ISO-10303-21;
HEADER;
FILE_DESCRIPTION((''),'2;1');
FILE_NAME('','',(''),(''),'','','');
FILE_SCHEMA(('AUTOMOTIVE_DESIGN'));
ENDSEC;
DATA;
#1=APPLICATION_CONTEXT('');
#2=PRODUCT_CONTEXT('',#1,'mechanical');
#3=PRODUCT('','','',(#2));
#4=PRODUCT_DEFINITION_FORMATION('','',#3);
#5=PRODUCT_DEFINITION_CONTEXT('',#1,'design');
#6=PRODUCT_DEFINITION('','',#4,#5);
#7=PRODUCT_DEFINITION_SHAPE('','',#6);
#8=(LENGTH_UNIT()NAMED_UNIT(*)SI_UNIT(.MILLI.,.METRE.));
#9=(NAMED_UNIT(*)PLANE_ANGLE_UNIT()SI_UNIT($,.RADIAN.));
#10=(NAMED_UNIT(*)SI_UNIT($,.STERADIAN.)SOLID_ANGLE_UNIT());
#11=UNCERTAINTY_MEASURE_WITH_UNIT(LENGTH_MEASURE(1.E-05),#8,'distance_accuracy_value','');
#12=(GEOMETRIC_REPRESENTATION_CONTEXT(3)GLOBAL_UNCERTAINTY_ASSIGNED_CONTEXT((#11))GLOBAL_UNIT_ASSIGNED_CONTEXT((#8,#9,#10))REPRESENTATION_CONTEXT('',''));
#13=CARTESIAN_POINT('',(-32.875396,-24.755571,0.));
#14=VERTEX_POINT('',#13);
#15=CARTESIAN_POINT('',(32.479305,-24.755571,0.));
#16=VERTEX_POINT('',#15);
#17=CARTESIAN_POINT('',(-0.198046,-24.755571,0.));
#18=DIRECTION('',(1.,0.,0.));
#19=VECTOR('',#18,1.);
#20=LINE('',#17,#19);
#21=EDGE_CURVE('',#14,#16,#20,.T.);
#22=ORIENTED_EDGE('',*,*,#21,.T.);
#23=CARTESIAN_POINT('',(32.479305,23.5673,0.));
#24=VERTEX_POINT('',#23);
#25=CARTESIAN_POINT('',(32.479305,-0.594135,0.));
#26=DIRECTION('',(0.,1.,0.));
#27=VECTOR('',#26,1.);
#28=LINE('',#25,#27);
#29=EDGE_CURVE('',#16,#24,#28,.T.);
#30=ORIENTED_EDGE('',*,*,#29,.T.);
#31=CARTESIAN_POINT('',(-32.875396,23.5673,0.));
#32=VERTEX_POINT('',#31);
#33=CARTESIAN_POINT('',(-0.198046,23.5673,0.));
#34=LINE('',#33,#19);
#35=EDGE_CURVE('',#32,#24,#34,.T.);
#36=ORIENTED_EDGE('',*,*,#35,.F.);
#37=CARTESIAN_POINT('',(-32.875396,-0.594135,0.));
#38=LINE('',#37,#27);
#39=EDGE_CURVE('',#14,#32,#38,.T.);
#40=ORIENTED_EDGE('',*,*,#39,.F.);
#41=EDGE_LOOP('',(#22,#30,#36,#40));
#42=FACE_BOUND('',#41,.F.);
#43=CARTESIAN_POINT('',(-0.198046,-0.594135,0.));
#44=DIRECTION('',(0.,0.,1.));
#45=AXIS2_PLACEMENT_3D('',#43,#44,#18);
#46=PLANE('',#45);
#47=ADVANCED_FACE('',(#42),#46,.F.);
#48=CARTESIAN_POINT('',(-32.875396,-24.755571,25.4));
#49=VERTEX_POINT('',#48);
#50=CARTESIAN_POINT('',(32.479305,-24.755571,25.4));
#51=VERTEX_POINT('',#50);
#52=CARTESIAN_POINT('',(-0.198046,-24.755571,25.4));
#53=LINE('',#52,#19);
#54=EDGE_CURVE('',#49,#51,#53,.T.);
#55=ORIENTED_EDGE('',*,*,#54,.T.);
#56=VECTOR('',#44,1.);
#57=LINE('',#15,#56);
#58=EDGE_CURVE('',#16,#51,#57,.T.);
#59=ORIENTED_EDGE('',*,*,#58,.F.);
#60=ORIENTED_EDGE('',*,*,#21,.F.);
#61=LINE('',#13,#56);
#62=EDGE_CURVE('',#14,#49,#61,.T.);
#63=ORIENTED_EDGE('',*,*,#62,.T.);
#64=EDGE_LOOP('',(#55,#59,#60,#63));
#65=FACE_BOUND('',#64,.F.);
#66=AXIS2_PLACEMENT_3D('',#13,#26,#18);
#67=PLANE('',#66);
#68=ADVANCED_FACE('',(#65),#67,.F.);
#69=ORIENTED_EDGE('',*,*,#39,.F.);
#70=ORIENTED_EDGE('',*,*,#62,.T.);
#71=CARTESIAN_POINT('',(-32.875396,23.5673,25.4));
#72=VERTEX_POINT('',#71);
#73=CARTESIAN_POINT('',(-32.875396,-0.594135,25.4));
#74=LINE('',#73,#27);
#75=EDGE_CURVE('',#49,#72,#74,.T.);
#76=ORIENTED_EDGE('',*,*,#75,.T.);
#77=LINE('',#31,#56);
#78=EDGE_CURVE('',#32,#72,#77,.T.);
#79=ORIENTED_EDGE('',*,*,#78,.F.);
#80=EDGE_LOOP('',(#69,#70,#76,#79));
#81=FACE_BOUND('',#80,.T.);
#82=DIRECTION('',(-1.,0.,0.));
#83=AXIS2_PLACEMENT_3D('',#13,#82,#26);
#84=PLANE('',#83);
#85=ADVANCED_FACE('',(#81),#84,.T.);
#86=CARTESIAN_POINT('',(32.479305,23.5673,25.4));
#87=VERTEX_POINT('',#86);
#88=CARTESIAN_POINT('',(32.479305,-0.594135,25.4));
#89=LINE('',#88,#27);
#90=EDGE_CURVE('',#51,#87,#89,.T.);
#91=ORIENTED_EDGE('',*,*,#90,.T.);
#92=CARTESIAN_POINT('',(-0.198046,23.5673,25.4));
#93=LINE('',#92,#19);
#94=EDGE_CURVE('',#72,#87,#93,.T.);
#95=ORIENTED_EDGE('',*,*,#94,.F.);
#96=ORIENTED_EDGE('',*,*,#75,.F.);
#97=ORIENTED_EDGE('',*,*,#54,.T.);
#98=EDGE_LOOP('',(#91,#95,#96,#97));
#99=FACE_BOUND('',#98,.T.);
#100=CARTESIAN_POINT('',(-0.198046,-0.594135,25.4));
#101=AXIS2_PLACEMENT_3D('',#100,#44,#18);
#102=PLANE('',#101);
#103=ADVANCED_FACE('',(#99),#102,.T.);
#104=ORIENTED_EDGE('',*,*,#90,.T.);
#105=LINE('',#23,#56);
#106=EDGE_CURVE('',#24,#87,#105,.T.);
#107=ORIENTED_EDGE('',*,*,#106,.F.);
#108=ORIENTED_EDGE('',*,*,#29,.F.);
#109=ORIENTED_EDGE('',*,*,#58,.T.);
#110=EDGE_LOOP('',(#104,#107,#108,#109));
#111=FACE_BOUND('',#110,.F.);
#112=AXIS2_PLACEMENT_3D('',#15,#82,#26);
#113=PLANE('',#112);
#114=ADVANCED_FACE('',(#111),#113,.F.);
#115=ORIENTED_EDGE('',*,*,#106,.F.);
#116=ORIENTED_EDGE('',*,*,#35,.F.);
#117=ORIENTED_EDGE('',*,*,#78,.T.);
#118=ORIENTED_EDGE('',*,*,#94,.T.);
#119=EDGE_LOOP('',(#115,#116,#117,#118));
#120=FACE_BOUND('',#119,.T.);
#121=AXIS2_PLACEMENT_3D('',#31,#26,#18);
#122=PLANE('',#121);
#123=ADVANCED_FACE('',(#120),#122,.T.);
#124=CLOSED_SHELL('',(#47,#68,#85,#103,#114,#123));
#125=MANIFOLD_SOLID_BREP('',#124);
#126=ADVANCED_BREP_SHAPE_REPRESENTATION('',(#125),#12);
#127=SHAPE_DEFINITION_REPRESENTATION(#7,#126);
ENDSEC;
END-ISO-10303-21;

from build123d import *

# Parameters (mm, degrees)
F0_W     = 65.3547011316
F0_H     = 48.3228713274
F1_DEPTH = 25.4


# Not quite as in the source:
# - the program builds the solid bodies; features that only make, move or delete a surface that nothing else refers to are left out


with BuildPart() as f1:
    # F0 (on Top) → F1 (new body)
    with BuildSketch(Plane.XY):
        with Locations((-0.1980457455, -0.5941353738)):
            Rectangle(F0_W, F0_H)
    extrude(amount=F1_DEPTH)


solid = f1.part
